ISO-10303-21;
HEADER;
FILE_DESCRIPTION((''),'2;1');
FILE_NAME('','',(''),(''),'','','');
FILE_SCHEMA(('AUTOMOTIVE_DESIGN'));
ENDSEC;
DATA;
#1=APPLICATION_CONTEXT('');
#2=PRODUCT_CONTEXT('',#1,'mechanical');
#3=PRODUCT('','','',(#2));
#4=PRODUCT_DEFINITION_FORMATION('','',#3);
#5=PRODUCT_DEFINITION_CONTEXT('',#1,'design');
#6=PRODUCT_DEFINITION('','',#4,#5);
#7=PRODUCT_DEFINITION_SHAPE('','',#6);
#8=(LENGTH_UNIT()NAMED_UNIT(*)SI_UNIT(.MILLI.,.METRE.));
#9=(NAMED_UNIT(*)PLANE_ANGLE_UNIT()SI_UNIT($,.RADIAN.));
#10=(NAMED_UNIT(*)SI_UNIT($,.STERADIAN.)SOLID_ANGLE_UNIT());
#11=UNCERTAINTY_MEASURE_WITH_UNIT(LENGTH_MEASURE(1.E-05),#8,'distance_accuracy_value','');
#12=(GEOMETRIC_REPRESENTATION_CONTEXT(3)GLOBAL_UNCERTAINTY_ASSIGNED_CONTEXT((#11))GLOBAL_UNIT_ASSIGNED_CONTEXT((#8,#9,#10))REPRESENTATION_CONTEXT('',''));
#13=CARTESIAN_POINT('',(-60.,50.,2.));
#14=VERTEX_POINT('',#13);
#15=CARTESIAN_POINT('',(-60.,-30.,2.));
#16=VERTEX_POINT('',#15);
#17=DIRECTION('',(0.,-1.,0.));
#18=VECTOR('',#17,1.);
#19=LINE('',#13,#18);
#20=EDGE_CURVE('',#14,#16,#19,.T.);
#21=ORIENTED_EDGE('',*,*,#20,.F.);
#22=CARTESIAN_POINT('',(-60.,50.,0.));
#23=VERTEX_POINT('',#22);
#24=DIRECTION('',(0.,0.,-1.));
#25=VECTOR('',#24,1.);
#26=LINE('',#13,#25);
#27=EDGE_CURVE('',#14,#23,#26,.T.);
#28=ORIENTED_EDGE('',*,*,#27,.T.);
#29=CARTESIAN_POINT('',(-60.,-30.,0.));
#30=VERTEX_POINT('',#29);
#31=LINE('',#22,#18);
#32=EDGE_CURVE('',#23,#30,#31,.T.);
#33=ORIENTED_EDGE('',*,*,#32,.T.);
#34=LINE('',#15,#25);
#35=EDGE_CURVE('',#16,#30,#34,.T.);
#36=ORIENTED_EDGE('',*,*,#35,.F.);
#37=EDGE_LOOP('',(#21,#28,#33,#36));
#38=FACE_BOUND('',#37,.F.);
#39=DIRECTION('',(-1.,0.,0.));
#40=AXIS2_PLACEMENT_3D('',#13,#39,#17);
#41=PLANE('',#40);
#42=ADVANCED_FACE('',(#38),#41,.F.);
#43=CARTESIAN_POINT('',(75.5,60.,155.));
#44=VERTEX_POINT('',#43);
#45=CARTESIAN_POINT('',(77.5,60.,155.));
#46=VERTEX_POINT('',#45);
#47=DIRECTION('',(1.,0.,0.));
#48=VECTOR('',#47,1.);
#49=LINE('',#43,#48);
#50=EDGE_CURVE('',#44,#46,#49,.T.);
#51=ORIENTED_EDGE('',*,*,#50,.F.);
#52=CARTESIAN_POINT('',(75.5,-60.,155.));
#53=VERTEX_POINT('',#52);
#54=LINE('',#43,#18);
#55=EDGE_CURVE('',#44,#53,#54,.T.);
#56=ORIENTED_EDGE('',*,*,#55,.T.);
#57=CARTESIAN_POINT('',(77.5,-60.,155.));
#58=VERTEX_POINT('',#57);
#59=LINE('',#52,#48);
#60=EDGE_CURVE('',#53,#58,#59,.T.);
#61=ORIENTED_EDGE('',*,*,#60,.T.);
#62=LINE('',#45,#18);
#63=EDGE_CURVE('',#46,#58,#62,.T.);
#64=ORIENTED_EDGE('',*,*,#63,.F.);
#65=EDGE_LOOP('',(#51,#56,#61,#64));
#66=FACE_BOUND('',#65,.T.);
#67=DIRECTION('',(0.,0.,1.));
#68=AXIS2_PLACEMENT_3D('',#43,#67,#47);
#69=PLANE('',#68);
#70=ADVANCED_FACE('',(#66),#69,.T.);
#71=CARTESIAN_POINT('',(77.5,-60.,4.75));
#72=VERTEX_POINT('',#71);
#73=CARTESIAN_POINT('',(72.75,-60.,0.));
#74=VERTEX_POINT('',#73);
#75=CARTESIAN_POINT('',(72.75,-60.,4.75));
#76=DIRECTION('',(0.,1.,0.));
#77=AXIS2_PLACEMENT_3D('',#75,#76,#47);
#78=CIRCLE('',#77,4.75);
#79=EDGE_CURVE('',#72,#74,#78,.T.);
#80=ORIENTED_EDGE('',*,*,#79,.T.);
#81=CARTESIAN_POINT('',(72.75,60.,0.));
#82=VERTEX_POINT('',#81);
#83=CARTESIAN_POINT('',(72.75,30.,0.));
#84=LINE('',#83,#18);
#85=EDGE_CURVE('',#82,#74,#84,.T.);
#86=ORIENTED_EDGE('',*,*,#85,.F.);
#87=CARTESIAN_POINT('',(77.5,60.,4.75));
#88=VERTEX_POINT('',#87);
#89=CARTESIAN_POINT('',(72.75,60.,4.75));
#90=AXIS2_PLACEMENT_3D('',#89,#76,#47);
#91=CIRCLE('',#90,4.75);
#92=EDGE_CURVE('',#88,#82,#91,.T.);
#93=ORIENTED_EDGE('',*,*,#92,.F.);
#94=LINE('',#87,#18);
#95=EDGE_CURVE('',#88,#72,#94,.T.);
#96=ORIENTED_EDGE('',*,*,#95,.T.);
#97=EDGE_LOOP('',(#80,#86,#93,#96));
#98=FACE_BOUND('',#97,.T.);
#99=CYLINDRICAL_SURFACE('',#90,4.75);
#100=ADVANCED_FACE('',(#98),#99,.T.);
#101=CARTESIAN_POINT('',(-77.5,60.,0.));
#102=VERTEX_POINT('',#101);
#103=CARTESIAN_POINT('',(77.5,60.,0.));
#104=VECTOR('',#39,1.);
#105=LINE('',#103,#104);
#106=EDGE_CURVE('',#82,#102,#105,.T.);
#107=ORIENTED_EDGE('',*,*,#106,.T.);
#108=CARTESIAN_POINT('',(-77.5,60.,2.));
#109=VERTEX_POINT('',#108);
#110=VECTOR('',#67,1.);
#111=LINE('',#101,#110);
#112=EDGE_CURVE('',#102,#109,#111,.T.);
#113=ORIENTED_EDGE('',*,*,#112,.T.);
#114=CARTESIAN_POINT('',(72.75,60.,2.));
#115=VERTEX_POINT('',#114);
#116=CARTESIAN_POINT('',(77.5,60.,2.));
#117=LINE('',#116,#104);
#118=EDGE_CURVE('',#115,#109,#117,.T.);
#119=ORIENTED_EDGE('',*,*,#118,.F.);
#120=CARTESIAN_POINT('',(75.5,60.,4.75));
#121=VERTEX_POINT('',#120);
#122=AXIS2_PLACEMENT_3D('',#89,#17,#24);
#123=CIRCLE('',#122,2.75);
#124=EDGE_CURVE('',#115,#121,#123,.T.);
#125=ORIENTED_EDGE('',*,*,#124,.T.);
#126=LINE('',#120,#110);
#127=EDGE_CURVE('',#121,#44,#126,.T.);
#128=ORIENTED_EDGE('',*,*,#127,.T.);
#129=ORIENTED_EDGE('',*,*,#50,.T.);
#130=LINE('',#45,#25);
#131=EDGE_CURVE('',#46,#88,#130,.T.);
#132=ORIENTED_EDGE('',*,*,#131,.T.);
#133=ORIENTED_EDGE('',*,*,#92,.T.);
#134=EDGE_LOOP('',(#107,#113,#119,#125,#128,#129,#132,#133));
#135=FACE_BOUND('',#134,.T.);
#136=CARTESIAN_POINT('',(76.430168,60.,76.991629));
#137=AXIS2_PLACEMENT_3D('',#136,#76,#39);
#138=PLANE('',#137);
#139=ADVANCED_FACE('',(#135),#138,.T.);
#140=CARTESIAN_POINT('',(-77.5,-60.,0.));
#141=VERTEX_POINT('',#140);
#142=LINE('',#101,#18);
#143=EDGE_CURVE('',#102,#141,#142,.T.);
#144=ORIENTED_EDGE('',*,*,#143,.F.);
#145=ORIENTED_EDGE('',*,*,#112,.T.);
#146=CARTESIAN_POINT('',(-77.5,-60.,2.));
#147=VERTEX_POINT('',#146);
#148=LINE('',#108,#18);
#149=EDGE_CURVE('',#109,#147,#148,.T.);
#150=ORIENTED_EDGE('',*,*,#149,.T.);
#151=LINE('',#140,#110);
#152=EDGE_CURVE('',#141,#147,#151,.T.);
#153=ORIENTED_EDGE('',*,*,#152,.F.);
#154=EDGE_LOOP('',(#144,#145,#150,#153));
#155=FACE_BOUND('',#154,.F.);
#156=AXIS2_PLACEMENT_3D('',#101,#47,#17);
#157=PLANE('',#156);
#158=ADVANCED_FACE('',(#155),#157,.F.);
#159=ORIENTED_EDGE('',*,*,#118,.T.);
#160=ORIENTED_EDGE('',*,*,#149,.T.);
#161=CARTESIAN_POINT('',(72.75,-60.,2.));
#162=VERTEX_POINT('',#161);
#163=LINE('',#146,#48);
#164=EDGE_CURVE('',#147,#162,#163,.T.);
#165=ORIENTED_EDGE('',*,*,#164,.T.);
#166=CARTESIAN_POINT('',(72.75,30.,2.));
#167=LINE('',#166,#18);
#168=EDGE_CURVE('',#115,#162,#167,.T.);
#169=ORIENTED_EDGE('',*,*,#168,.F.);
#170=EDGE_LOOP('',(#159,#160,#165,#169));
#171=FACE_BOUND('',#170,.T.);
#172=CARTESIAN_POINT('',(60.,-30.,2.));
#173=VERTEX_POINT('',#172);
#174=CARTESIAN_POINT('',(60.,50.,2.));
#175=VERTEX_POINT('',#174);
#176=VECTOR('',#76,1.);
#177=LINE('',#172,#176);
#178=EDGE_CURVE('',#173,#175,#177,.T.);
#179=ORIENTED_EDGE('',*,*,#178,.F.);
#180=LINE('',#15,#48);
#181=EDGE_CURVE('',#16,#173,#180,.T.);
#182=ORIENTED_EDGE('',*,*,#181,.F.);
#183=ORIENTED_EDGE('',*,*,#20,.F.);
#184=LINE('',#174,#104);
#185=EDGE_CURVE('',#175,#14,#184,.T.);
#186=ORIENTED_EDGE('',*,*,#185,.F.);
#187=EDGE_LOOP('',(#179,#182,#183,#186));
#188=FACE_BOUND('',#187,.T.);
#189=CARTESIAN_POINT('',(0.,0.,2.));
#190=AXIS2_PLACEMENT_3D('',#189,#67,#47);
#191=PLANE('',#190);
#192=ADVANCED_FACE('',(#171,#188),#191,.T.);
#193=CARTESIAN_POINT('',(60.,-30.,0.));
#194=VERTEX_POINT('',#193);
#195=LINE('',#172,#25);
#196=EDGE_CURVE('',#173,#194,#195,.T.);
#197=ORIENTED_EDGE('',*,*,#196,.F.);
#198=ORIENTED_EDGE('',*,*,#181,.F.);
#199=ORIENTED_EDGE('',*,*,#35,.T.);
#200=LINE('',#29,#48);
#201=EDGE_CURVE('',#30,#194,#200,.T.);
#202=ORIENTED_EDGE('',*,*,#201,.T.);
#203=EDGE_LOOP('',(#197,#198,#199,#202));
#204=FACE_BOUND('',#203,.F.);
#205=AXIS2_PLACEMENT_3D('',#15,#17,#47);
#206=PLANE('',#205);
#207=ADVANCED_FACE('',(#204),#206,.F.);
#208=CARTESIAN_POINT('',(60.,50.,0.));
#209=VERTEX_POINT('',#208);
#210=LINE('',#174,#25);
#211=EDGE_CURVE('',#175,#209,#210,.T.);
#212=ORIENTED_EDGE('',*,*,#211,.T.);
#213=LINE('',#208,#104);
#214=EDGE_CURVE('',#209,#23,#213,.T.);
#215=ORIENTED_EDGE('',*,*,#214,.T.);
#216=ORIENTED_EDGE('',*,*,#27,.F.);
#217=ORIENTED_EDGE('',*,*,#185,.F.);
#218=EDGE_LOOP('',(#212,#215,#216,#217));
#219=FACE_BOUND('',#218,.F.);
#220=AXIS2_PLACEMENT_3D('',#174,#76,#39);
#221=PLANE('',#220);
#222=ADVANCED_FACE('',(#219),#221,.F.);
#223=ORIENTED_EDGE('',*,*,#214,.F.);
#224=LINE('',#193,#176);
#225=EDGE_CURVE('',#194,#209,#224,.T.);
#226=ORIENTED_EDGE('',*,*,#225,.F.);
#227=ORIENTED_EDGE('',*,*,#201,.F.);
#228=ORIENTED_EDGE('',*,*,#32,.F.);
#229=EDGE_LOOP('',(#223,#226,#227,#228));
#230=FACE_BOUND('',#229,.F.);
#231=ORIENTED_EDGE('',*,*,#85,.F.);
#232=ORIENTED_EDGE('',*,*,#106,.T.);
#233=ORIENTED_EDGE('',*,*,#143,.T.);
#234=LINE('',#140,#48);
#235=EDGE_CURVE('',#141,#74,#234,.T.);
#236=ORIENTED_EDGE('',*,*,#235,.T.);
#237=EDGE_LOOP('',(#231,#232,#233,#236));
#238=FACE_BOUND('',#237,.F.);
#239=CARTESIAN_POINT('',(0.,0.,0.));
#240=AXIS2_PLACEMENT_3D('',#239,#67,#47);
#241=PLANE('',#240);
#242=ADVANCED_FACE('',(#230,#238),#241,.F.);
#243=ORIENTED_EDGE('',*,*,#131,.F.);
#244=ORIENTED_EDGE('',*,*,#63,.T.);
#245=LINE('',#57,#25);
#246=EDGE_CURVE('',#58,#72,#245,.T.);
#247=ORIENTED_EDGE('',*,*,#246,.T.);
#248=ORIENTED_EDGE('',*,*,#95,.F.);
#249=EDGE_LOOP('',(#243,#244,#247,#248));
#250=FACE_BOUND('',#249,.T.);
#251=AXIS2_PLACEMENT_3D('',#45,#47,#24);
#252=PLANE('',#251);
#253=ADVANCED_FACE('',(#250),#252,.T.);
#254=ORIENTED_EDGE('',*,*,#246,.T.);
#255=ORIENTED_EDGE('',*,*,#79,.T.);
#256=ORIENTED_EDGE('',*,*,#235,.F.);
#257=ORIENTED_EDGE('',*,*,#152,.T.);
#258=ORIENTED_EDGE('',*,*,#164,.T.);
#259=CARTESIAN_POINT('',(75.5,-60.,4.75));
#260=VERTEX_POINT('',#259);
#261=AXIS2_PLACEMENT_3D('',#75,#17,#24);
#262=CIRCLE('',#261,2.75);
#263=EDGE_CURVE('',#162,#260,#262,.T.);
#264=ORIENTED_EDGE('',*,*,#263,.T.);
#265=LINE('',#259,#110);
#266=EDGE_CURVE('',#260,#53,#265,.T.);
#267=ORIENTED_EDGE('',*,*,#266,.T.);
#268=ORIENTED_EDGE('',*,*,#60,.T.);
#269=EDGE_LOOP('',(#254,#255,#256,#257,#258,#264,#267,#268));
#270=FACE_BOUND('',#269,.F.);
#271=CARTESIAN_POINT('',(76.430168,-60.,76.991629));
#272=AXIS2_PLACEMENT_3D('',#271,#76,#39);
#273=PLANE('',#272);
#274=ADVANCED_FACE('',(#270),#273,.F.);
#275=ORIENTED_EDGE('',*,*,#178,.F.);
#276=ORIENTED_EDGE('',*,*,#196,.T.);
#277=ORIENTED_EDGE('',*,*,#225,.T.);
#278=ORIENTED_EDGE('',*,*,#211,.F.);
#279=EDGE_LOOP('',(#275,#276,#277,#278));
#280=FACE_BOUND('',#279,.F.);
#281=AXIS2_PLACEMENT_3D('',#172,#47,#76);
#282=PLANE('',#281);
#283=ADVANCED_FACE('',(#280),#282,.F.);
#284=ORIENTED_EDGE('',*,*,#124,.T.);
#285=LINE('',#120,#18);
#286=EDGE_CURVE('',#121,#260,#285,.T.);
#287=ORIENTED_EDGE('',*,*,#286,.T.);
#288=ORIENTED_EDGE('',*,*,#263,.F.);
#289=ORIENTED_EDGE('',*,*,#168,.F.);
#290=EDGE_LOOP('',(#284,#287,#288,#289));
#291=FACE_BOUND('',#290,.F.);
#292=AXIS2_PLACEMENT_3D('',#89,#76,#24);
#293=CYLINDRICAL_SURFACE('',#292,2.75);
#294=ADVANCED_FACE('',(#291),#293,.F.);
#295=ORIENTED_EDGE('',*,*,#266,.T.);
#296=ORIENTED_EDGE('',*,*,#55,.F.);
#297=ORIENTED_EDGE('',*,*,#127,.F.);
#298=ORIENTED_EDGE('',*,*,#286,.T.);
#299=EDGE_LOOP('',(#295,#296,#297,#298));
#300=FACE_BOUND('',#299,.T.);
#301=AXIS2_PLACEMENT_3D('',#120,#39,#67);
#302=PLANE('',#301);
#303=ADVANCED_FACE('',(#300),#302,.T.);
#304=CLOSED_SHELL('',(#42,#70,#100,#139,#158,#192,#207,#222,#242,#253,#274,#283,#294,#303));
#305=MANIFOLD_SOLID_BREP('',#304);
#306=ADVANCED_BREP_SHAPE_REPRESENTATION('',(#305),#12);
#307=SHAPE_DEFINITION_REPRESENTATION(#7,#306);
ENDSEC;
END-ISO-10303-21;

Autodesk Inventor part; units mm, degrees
ref_plane "YZ Plane" through (0, 0, 0) normal (1, 0, 0) x (0, 1, 0)
ref_plane "XZ Plane" through (0, 0, 0) normal (0, 1, 0) x (-1, 0, 0)
ref_plane "XY Plane" through (0, 0, 0) normal (0, 0, 1) x (1, 0, 0)
sketch "Sketch1" plane through (0, 0, 0) normal (0, 0, 1) x (1, 0, 0)
  line L0 (-77.5, -60) -> (77.5, -60)
  line L1 (77.5, -60) -> (77.5, 60)
  line L2 (77.5, 60) -> (-77.5, 60)
  line L3 (-77.5, 60) -> (-77.5, -60)
  line L4 (-77.5, -60) -> (77.5, 60) construction
  line L5 (77.5, -60) -> (-77.5, 60) construction
  point P0 (0, 0)
  dimension "d154" = 155
  dimension "d155" = 120
extrude "Plate3" add sketch "Sketch1" along normal blind 2
sketch "Sketch7" plane through (75.5, 60, 0) normal (1, 0, 0) x (0, 1, 0)
  line L0 (-120, 0) -> (0, 0)
  line L1 (0, 0) -> (0, 155)
  line L2 (0, 155) -> (-120, 155)
  line L3 (-120, 155) -> (-120, 0)
edge flange "Flange3" height 155 angle 90 thickness 2 bend radius 2.75 thickness toward (1, 0, 0) relief round relief width 2 relief depth 1 edges at (77.5, 0, 2) wall of the first edge with corners at (75.5, -60, 0) (75.5, 60, 0) (75.5, 60, 155) (75.5, -60, 155)
bend "Bend3"
corner "Corner3"
sketch "Sketch8" plane through (0, 0, 2) normal (0, 0, 1) x (1, 0, 0)
  line L0 (60, 50) -> (-60, 50)
  line L1 (-60, 50) -> (-60, -30)
  line L2 (-60, -30) -> (60, -30)
  line L3 (60, -30) -> (60, 50)
  line L4 (60, 50) -> (-60, -30) construction
  line L5 (-60, 50) -> (60, -30) construction
  line L6 (-77.5, 60) -> (72.75, 60) projected
  point P0 (0, 0)
  point P1 (0, 10)
  dimension "d166" = 120
  dimension "d167" = 80
  dimension "d168" = 10
extrude "Cut1" cut sketch "Sketch8" against normal blind 2
equation "\"БОРТ_стрингер_3_высота\" = 63"
equation "\"БОРТ_стрингер_4_высота\" = 48"
equation "\"БОРТ_стрингер_5_высота\" = 54"
equation "\"БОРТ_стрингер_6_высота\" = 81"
properties part number "MNT-CDF-503  main tube 1" material "Stainless Steel"
